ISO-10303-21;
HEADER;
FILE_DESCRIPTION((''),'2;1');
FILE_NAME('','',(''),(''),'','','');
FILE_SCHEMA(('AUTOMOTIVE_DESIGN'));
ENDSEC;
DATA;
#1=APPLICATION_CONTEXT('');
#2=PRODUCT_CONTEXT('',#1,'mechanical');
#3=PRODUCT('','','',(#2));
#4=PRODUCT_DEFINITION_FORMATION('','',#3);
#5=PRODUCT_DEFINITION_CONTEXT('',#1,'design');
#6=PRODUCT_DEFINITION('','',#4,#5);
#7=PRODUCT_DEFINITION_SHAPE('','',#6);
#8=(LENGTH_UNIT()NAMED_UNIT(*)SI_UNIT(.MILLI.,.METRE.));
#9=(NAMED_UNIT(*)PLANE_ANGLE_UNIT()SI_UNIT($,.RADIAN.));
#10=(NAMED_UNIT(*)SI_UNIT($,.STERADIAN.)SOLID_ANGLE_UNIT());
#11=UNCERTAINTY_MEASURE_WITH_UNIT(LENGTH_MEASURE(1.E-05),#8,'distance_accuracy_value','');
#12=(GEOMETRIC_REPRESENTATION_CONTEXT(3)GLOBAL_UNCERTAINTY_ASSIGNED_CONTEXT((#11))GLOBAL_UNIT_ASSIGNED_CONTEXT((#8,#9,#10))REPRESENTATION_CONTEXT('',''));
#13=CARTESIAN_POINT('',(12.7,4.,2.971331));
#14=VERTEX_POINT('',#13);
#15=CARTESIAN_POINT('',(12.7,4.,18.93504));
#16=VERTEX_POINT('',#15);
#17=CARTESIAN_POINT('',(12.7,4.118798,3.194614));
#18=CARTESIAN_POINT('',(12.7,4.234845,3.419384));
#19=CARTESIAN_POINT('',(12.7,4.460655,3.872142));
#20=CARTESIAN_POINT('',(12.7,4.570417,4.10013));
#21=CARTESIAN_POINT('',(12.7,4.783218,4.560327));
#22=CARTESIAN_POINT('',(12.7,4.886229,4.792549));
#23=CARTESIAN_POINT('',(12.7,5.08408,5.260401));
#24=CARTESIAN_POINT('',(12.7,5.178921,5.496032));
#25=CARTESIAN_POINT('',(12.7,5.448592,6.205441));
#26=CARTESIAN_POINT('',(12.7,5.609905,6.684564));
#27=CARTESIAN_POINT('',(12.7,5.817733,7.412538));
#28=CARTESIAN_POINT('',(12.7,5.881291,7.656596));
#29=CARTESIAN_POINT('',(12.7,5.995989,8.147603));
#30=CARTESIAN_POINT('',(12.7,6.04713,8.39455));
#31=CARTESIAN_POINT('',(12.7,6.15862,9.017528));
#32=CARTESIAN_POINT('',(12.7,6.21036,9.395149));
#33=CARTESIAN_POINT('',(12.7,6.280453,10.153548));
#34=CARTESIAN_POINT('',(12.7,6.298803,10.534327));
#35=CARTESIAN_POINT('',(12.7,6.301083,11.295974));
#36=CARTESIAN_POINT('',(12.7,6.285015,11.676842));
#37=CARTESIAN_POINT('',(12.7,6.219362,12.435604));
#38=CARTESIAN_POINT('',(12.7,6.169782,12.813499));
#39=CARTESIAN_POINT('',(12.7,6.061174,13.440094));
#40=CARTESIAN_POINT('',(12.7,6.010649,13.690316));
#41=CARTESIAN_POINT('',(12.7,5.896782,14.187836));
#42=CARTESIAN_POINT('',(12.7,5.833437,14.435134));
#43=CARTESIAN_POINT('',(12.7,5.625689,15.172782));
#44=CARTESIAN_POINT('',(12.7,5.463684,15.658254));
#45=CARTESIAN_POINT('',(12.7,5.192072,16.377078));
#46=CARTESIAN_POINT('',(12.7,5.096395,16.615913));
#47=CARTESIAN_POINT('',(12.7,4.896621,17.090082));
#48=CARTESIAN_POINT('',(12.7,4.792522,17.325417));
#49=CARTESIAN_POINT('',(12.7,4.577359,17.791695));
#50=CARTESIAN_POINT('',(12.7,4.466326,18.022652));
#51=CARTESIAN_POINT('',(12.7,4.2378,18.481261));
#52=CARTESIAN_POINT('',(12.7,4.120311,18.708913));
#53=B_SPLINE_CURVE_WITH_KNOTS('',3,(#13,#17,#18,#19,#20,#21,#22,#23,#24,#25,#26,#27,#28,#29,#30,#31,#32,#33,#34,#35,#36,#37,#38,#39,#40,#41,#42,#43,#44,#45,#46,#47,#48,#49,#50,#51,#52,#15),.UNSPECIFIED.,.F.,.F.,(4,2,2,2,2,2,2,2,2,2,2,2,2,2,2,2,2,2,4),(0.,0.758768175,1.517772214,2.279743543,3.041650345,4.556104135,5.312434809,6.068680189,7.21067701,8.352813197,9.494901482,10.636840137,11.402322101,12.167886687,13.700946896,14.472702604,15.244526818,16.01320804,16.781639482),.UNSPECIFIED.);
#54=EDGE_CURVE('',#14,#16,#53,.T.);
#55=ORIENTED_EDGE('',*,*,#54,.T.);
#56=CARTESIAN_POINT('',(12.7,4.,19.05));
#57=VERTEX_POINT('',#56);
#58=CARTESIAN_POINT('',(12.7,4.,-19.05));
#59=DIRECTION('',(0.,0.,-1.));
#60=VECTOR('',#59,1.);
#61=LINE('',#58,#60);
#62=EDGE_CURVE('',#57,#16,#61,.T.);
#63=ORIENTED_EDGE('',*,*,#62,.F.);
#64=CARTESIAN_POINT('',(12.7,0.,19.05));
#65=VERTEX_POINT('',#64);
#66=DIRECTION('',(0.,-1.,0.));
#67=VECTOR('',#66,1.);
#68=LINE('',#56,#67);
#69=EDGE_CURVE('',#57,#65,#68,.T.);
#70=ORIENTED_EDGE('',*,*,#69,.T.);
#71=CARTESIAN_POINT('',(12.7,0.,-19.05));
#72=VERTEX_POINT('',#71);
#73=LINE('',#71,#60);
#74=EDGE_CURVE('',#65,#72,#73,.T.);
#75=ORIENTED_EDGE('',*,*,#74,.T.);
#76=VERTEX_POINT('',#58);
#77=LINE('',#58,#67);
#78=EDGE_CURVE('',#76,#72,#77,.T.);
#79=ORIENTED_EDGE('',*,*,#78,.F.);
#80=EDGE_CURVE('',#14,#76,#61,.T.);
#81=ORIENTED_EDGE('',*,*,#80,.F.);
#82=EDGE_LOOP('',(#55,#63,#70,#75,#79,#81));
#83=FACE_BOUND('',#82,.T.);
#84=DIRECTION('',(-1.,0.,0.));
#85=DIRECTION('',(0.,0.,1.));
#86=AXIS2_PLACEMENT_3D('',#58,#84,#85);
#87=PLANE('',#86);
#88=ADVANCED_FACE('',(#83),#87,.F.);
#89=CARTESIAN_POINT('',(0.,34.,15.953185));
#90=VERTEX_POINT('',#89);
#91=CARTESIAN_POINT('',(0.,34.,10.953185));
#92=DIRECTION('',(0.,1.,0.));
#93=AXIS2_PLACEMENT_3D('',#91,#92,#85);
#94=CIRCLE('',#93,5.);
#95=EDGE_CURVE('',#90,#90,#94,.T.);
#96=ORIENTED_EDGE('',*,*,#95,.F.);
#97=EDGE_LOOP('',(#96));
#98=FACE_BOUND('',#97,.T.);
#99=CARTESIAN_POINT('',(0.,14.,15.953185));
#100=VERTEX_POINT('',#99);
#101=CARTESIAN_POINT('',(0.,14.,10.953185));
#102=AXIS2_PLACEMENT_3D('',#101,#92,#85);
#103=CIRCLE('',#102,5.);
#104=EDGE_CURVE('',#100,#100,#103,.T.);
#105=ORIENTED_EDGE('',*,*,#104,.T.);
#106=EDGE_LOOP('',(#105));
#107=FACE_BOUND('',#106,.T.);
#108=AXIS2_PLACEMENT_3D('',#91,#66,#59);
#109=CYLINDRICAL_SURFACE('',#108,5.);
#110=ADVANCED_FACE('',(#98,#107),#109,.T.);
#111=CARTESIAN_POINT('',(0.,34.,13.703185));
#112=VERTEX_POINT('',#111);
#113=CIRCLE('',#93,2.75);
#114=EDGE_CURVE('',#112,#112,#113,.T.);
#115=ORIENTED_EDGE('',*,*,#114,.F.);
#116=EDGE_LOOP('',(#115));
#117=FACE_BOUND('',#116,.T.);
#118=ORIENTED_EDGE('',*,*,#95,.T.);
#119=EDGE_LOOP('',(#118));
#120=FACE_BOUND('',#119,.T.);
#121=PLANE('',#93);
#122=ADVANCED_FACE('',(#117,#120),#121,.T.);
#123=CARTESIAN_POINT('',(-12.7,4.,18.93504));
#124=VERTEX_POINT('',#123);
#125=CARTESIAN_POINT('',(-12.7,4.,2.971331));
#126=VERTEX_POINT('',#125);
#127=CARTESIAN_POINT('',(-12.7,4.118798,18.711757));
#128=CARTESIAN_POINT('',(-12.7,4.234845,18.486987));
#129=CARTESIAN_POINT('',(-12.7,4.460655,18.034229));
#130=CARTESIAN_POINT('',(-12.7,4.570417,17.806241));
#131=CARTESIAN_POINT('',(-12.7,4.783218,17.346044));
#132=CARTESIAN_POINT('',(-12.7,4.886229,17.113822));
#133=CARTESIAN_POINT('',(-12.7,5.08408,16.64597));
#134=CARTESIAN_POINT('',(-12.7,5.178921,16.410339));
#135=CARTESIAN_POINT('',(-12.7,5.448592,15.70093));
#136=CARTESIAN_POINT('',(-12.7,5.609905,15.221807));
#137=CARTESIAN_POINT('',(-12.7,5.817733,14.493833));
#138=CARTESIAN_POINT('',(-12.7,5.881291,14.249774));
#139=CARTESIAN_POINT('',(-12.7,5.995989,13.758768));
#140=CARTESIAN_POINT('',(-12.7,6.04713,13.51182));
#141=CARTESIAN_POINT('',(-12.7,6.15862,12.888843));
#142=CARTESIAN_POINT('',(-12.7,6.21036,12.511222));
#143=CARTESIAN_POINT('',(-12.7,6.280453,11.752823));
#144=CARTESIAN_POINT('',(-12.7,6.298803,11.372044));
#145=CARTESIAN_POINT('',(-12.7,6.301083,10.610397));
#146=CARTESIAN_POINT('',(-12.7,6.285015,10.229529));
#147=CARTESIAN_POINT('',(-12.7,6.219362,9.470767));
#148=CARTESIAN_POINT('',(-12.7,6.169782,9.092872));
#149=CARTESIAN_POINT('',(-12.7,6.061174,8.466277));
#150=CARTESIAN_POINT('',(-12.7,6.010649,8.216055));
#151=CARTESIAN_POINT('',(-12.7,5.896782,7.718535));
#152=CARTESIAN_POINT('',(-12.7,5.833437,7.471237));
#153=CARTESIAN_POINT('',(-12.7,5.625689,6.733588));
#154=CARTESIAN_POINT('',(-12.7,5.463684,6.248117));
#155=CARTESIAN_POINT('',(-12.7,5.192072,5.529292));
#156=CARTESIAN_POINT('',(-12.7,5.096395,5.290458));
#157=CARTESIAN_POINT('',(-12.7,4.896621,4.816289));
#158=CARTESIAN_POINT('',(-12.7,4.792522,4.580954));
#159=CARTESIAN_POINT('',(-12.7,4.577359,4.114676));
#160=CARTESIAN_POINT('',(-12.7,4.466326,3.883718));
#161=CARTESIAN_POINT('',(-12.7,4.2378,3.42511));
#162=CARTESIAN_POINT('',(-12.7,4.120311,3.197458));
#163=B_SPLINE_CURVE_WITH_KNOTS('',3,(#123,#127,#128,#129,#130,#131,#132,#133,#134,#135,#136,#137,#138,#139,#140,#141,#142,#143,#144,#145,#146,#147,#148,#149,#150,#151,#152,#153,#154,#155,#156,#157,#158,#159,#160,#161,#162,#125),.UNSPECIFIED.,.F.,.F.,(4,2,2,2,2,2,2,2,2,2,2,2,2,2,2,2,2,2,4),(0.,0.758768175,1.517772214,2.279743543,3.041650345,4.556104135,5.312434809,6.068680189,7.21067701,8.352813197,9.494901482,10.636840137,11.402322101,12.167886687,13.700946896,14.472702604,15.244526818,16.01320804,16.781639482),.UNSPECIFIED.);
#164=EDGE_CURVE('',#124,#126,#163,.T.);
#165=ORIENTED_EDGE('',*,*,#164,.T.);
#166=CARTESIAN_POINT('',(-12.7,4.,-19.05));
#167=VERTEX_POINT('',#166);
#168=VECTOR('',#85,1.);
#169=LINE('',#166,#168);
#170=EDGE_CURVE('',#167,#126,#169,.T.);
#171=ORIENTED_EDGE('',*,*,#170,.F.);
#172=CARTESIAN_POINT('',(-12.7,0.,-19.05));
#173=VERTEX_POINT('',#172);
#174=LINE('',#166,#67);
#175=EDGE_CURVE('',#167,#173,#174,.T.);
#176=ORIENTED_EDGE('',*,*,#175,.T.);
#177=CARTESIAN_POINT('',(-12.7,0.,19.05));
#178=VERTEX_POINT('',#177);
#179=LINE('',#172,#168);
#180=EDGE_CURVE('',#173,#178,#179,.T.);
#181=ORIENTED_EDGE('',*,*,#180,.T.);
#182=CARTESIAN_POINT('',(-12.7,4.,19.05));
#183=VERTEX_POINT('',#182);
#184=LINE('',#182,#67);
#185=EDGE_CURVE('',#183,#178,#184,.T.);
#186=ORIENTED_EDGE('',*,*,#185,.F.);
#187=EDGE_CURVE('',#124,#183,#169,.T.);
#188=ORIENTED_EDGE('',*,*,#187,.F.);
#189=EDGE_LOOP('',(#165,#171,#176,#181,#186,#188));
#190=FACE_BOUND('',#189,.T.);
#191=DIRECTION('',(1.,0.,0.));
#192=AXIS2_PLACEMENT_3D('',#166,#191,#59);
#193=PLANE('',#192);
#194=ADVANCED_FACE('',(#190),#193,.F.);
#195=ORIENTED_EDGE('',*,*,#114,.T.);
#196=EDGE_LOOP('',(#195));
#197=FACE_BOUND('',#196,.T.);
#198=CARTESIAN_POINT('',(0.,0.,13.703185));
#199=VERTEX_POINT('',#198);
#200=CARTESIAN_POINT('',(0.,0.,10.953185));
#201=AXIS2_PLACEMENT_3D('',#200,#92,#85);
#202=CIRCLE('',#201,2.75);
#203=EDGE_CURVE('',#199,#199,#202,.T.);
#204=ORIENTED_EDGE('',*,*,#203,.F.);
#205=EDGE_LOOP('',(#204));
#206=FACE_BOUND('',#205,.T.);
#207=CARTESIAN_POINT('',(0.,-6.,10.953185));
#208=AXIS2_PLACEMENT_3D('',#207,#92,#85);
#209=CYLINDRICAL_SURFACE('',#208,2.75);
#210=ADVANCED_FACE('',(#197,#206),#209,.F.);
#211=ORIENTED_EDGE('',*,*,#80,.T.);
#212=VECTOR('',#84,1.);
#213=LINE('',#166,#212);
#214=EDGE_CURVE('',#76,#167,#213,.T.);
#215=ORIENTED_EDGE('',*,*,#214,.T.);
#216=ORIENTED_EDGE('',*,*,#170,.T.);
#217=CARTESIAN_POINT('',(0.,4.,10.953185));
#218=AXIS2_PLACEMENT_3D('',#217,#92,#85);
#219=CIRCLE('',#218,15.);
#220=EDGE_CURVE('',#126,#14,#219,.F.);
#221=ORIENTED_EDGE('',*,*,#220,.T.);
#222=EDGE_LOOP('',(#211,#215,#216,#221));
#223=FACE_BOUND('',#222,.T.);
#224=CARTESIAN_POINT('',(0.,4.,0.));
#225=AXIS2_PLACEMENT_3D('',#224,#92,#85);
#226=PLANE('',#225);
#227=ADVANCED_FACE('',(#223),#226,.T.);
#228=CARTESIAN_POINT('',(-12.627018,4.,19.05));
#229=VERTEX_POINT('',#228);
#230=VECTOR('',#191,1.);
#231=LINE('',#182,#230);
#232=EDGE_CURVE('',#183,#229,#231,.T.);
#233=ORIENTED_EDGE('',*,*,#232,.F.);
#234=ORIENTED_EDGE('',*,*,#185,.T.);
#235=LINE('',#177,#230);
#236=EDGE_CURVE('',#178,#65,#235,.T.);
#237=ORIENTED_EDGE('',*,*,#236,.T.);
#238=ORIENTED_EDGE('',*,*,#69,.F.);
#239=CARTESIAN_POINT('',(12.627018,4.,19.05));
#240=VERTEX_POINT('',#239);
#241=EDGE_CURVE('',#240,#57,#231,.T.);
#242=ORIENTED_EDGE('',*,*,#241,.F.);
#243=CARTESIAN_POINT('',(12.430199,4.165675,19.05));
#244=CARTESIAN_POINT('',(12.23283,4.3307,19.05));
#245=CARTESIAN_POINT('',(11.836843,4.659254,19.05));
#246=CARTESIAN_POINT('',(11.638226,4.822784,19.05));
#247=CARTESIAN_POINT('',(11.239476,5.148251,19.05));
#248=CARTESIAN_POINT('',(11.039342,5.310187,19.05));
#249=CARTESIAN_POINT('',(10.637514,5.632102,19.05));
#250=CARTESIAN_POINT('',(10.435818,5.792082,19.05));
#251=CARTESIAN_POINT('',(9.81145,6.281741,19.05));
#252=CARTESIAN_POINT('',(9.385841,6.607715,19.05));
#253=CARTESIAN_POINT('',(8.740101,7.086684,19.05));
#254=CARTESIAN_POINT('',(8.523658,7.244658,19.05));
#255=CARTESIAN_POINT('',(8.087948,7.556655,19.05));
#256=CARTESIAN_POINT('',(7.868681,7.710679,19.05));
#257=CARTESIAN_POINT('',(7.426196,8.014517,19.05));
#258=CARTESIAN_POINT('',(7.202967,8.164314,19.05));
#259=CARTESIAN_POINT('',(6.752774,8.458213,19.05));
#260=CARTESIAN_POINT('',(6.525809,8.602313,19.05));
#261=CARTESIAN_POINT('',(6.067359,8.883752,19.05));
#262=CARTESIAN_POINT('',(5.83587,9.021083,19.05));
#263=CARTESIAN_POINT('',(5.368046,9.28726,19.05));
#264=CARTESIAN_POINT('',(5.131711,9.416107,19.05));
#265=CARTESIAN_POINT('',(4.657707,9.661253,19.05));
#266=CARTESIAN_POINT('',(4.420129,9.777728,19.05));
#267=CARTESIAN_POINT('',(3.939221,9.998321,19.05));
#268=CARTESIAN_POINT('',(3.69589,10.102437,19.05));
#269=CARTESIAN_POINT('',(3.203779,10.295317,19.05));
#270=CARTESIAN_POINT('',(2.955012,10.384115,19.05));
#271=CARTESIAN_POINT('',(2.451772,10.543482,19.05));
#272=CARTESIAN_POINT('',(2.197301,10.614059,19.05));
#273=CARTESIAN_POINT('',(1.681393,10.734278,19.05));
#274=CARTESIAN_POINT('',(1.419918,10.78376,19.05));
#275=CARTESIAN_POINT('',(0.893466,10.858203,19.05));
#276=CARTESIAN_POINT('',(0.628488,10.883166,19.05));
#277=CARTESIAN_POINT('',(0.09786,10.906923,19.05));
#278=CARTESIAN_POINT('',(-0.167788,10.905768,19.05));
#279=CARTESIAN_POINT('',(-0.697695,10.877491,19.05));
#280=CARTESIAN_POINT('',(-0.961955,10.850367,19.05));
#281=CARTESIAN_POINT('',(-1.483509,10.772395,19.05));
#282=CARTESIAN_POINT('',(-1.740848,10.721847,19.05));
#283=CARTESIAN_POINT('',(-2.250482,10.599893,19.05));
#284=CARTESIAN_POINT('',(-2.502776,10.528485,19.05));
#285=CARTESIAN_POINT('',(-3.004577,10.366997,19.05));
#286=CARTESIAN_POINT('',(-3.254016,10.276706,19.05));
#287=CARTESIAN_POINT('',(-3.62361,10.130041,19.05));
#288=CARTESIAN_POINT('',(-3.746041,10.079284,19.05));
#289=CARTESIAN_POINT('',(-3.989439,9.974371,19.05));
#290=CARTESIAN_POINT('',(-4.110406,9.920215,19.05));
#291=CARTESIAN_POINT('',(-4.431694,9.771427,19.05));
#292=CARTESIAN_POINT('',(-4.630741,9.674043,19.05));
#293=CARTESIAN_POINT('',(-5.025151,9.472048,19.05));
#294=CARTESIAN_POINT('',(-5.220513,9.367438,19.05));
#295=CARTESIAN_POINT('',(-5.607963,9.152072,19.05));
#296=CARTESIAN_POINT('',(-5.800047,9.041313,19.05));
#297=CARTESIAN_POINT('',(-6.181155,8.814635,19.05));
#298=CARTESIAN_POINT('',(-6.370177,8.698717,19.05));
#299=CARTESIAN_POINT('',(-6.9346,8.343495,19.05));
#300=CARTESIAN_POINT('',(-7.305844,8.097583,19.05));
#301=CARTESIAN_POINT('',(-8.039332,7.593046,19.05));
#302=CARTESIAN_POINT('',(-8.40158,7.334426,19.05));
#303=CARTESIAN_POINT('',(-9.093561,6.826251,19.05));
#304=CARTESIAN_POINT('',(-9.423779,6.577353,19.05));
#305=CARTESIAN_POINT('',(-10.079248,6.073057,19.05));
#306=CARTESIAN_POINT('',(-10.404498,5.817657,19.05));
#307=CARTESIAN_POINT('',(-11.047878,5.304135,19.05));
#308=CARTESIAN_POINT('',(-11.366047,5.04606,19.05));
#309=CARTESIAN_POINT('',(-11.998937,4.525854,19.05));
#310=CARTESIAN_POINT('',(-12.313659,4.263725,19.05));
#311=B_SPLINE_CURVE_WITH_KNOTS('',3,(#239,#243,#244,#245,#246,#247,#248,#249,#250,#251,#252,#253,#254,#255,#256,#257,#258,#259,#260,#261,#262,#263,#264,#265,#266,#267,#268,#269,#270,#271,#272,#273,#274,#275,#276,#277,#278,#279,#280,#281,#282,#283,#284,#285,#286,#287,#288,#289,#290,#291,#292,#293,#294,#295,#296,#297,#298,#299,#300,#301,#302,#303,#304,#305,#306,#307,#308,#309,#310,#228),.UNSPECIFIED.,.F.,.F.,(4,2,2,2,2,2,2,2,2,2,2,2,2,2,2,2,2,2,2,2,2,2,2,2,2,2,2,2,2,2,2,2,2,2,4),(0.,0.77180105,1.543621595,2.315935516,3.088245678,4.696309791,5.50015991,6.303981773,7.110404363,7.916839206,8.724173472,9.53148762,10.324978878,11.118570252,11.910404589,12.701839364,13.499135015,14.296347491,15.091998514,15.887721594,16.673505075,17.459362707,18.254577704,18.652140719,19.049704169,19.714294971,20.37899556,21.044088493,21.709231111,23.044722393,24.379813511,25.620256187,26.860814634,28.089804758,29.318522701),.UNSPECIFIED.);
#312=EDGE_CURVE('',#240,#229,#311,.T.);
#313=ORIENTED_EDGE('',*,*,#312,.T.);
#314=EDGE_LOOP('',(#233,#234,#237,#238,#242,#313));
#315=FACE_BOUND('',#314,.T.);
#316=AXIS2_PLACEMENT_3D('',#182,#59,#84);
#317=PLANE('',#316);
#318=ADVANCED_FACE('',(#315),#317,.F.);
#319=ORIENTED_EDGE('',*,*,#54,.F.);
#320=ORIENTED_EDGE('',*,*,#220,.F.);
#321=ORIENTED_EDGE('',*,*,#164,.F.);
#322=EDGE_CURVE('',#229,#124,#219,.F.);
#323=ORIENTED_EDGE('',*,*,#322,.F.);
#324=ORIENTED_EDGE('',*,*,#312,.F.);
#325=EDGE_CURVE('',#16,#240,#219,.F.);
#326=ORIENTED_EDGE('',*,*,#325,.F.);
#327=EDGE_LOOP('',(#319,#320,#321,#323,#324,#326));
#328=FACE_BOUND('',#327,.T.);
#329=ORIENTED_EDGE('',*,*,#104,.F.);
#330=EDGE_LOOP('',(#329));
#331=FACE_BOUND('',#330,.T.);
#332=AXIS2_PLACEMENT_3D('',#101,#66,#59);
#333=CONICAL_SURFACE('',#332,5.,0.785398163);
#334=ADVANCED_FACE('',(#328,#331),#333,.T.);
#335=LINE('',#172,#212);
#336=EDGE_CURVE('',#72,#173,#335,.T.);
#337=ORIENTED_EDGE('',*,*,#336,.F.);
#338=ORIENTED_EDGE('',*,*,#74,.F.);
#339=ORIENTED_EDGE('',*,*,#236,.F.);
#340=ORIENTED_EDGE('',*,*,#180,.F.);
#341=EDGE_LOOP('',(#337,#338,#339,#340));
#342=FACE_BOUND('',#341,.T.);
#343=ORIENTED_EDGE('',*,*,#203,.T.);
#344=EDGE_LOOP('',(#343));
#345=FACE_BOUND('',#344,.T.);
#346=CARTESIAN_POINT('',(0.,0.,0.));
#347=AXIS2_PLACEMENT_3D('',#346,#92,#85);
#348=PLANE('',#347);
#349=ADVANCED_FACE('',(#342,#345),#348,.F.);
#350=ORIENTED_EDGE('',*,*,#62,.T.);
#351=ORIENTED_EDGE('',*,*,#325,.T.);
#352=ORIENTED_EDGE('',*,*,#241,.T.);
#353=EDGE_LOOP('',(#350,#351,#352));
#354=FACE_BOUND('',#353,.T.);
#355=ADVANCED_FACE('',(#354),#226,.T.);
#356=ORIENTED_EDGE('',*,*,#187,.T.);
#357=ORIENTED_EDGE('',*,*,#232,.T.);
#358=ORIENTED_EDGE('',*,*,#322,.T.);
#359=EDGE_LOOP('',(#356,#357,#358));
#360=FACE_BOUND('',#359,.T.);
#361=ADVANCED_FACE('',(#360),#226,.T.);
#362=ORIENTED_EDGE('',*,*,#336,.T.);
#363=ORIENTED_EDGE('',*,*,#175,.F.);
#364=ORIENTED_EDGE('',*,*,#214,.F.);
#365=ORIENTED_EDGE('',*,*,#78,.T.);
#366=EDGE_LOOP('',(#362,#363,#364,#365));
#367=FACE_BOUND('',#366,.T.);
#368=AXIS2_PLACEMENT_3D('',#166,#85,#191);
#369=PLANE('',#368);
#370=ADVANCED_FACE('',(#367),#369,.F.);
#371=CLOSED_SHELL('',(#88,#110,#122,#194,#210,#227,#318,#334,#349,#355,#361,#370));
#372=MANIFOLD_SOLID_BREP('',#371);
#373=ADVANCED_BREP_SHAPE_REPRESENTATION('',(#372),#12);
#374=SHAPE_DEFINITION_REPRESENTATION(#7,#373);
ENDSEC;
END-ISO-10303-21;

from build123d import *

# Parameters (mm, degrees)
SKETCH1_W           = 25.4
SKETCH1_H           = 38.1
BOSS_EXTRUDE1_DEPTH = 4
SKETCH2_R           = 5
BOSS_EXTRUDE2_DEPTH = 30
SKETCH3_R           = 2.75
CUT_EXTRUDE1_DEPTH  = 40
CHAMFER1_SIZE       = 10


with BuildPart() as part:
    # Sketch1 → Boss-Extrude1 (new body)
    with BuildSketch(Plane(origin=(0, 0, 0), x_dir=(1, 0, 0), z_dir=(0, 1, 0))):
        Rectangle(SKETCH1_W, SKETCH1_H)
    extrude(amount=BOSS_EXTRUDE1_DEPTH)

    # Sketch2 → Boss-Extrude2 (add)
    with BuildSketch(Plane(origin=(0, 4, 0), x_dir=(1, 0, 0), z_dir=(0, 1, 0))):
        with Locations(Location((0, -10.9531854, 0), (0, 0, 270))):
            Circle(SKETCH2_R)
    extrude(amount=BOSS_EXTRUDE2_DEPTH)

    # Sketch3 → Cut-Extrude1 (cut)
    with BuildSketch(Plane(origin=(0, 34, 0), x_dir=(1, 0, 0), z_dir=(0, 1, 0))):
        with Locations(Location((0, -10.9531854, 0), (0, 0, 270))):
            Circle(SKETCH3_R)
    extrude(amount=-CUT_EXTRUDE1_DEPTH, mode=Mode.SUBTRACT)

    # Chamfer1
    # the kernel refuses this chamfer: 10 mm, written as the material it adds along each edge
    with BuildSketch(Plane(origin=(0, 4, 10.9531854), x_dir=(0, 0, 1), z_dir=(-1, 0, 0))) as chamfer1_piece_1_section:
        Polygon((5 + CHAMFER1_SIZE, 0), (5, CHAMFER1_SIZE), (5, 0), align=None)
    chamfer1_piece_1 = revolve(axis=Axis((0, 4, 10.9531854), (0, 1, 0)), mode=Mode.PRIVATE)
    chamfer1_piece_1 = split(chamfer1_piece_1, bisect_by=Plane(origin=(-12.7, 8.904804992, 1.048380408), z_dir=(1, 0, 0)), keep=Keep.TOP, mode=Mode.PRIVATE)
    chamfer1_piece_1 = split(chamfer1_piece_1, bisect_by=Plane(origin=(12.7, 8.904804992, 1.048380408), z_dir=(-1, 0, 0)), keep=Keep.TOP, mode=Mode.PRIVATE)
    chamfer1_piece_1 = split(chamfer1_piece_1, bisect_by=Plane(origin=(0, 8.904804992, 19.05), z_dir=(0, 0, -1)), keep=Keep.TOP, mode=Mode.PRIVATE)
    add(chamfer1_piece_1)


solid = part.part
